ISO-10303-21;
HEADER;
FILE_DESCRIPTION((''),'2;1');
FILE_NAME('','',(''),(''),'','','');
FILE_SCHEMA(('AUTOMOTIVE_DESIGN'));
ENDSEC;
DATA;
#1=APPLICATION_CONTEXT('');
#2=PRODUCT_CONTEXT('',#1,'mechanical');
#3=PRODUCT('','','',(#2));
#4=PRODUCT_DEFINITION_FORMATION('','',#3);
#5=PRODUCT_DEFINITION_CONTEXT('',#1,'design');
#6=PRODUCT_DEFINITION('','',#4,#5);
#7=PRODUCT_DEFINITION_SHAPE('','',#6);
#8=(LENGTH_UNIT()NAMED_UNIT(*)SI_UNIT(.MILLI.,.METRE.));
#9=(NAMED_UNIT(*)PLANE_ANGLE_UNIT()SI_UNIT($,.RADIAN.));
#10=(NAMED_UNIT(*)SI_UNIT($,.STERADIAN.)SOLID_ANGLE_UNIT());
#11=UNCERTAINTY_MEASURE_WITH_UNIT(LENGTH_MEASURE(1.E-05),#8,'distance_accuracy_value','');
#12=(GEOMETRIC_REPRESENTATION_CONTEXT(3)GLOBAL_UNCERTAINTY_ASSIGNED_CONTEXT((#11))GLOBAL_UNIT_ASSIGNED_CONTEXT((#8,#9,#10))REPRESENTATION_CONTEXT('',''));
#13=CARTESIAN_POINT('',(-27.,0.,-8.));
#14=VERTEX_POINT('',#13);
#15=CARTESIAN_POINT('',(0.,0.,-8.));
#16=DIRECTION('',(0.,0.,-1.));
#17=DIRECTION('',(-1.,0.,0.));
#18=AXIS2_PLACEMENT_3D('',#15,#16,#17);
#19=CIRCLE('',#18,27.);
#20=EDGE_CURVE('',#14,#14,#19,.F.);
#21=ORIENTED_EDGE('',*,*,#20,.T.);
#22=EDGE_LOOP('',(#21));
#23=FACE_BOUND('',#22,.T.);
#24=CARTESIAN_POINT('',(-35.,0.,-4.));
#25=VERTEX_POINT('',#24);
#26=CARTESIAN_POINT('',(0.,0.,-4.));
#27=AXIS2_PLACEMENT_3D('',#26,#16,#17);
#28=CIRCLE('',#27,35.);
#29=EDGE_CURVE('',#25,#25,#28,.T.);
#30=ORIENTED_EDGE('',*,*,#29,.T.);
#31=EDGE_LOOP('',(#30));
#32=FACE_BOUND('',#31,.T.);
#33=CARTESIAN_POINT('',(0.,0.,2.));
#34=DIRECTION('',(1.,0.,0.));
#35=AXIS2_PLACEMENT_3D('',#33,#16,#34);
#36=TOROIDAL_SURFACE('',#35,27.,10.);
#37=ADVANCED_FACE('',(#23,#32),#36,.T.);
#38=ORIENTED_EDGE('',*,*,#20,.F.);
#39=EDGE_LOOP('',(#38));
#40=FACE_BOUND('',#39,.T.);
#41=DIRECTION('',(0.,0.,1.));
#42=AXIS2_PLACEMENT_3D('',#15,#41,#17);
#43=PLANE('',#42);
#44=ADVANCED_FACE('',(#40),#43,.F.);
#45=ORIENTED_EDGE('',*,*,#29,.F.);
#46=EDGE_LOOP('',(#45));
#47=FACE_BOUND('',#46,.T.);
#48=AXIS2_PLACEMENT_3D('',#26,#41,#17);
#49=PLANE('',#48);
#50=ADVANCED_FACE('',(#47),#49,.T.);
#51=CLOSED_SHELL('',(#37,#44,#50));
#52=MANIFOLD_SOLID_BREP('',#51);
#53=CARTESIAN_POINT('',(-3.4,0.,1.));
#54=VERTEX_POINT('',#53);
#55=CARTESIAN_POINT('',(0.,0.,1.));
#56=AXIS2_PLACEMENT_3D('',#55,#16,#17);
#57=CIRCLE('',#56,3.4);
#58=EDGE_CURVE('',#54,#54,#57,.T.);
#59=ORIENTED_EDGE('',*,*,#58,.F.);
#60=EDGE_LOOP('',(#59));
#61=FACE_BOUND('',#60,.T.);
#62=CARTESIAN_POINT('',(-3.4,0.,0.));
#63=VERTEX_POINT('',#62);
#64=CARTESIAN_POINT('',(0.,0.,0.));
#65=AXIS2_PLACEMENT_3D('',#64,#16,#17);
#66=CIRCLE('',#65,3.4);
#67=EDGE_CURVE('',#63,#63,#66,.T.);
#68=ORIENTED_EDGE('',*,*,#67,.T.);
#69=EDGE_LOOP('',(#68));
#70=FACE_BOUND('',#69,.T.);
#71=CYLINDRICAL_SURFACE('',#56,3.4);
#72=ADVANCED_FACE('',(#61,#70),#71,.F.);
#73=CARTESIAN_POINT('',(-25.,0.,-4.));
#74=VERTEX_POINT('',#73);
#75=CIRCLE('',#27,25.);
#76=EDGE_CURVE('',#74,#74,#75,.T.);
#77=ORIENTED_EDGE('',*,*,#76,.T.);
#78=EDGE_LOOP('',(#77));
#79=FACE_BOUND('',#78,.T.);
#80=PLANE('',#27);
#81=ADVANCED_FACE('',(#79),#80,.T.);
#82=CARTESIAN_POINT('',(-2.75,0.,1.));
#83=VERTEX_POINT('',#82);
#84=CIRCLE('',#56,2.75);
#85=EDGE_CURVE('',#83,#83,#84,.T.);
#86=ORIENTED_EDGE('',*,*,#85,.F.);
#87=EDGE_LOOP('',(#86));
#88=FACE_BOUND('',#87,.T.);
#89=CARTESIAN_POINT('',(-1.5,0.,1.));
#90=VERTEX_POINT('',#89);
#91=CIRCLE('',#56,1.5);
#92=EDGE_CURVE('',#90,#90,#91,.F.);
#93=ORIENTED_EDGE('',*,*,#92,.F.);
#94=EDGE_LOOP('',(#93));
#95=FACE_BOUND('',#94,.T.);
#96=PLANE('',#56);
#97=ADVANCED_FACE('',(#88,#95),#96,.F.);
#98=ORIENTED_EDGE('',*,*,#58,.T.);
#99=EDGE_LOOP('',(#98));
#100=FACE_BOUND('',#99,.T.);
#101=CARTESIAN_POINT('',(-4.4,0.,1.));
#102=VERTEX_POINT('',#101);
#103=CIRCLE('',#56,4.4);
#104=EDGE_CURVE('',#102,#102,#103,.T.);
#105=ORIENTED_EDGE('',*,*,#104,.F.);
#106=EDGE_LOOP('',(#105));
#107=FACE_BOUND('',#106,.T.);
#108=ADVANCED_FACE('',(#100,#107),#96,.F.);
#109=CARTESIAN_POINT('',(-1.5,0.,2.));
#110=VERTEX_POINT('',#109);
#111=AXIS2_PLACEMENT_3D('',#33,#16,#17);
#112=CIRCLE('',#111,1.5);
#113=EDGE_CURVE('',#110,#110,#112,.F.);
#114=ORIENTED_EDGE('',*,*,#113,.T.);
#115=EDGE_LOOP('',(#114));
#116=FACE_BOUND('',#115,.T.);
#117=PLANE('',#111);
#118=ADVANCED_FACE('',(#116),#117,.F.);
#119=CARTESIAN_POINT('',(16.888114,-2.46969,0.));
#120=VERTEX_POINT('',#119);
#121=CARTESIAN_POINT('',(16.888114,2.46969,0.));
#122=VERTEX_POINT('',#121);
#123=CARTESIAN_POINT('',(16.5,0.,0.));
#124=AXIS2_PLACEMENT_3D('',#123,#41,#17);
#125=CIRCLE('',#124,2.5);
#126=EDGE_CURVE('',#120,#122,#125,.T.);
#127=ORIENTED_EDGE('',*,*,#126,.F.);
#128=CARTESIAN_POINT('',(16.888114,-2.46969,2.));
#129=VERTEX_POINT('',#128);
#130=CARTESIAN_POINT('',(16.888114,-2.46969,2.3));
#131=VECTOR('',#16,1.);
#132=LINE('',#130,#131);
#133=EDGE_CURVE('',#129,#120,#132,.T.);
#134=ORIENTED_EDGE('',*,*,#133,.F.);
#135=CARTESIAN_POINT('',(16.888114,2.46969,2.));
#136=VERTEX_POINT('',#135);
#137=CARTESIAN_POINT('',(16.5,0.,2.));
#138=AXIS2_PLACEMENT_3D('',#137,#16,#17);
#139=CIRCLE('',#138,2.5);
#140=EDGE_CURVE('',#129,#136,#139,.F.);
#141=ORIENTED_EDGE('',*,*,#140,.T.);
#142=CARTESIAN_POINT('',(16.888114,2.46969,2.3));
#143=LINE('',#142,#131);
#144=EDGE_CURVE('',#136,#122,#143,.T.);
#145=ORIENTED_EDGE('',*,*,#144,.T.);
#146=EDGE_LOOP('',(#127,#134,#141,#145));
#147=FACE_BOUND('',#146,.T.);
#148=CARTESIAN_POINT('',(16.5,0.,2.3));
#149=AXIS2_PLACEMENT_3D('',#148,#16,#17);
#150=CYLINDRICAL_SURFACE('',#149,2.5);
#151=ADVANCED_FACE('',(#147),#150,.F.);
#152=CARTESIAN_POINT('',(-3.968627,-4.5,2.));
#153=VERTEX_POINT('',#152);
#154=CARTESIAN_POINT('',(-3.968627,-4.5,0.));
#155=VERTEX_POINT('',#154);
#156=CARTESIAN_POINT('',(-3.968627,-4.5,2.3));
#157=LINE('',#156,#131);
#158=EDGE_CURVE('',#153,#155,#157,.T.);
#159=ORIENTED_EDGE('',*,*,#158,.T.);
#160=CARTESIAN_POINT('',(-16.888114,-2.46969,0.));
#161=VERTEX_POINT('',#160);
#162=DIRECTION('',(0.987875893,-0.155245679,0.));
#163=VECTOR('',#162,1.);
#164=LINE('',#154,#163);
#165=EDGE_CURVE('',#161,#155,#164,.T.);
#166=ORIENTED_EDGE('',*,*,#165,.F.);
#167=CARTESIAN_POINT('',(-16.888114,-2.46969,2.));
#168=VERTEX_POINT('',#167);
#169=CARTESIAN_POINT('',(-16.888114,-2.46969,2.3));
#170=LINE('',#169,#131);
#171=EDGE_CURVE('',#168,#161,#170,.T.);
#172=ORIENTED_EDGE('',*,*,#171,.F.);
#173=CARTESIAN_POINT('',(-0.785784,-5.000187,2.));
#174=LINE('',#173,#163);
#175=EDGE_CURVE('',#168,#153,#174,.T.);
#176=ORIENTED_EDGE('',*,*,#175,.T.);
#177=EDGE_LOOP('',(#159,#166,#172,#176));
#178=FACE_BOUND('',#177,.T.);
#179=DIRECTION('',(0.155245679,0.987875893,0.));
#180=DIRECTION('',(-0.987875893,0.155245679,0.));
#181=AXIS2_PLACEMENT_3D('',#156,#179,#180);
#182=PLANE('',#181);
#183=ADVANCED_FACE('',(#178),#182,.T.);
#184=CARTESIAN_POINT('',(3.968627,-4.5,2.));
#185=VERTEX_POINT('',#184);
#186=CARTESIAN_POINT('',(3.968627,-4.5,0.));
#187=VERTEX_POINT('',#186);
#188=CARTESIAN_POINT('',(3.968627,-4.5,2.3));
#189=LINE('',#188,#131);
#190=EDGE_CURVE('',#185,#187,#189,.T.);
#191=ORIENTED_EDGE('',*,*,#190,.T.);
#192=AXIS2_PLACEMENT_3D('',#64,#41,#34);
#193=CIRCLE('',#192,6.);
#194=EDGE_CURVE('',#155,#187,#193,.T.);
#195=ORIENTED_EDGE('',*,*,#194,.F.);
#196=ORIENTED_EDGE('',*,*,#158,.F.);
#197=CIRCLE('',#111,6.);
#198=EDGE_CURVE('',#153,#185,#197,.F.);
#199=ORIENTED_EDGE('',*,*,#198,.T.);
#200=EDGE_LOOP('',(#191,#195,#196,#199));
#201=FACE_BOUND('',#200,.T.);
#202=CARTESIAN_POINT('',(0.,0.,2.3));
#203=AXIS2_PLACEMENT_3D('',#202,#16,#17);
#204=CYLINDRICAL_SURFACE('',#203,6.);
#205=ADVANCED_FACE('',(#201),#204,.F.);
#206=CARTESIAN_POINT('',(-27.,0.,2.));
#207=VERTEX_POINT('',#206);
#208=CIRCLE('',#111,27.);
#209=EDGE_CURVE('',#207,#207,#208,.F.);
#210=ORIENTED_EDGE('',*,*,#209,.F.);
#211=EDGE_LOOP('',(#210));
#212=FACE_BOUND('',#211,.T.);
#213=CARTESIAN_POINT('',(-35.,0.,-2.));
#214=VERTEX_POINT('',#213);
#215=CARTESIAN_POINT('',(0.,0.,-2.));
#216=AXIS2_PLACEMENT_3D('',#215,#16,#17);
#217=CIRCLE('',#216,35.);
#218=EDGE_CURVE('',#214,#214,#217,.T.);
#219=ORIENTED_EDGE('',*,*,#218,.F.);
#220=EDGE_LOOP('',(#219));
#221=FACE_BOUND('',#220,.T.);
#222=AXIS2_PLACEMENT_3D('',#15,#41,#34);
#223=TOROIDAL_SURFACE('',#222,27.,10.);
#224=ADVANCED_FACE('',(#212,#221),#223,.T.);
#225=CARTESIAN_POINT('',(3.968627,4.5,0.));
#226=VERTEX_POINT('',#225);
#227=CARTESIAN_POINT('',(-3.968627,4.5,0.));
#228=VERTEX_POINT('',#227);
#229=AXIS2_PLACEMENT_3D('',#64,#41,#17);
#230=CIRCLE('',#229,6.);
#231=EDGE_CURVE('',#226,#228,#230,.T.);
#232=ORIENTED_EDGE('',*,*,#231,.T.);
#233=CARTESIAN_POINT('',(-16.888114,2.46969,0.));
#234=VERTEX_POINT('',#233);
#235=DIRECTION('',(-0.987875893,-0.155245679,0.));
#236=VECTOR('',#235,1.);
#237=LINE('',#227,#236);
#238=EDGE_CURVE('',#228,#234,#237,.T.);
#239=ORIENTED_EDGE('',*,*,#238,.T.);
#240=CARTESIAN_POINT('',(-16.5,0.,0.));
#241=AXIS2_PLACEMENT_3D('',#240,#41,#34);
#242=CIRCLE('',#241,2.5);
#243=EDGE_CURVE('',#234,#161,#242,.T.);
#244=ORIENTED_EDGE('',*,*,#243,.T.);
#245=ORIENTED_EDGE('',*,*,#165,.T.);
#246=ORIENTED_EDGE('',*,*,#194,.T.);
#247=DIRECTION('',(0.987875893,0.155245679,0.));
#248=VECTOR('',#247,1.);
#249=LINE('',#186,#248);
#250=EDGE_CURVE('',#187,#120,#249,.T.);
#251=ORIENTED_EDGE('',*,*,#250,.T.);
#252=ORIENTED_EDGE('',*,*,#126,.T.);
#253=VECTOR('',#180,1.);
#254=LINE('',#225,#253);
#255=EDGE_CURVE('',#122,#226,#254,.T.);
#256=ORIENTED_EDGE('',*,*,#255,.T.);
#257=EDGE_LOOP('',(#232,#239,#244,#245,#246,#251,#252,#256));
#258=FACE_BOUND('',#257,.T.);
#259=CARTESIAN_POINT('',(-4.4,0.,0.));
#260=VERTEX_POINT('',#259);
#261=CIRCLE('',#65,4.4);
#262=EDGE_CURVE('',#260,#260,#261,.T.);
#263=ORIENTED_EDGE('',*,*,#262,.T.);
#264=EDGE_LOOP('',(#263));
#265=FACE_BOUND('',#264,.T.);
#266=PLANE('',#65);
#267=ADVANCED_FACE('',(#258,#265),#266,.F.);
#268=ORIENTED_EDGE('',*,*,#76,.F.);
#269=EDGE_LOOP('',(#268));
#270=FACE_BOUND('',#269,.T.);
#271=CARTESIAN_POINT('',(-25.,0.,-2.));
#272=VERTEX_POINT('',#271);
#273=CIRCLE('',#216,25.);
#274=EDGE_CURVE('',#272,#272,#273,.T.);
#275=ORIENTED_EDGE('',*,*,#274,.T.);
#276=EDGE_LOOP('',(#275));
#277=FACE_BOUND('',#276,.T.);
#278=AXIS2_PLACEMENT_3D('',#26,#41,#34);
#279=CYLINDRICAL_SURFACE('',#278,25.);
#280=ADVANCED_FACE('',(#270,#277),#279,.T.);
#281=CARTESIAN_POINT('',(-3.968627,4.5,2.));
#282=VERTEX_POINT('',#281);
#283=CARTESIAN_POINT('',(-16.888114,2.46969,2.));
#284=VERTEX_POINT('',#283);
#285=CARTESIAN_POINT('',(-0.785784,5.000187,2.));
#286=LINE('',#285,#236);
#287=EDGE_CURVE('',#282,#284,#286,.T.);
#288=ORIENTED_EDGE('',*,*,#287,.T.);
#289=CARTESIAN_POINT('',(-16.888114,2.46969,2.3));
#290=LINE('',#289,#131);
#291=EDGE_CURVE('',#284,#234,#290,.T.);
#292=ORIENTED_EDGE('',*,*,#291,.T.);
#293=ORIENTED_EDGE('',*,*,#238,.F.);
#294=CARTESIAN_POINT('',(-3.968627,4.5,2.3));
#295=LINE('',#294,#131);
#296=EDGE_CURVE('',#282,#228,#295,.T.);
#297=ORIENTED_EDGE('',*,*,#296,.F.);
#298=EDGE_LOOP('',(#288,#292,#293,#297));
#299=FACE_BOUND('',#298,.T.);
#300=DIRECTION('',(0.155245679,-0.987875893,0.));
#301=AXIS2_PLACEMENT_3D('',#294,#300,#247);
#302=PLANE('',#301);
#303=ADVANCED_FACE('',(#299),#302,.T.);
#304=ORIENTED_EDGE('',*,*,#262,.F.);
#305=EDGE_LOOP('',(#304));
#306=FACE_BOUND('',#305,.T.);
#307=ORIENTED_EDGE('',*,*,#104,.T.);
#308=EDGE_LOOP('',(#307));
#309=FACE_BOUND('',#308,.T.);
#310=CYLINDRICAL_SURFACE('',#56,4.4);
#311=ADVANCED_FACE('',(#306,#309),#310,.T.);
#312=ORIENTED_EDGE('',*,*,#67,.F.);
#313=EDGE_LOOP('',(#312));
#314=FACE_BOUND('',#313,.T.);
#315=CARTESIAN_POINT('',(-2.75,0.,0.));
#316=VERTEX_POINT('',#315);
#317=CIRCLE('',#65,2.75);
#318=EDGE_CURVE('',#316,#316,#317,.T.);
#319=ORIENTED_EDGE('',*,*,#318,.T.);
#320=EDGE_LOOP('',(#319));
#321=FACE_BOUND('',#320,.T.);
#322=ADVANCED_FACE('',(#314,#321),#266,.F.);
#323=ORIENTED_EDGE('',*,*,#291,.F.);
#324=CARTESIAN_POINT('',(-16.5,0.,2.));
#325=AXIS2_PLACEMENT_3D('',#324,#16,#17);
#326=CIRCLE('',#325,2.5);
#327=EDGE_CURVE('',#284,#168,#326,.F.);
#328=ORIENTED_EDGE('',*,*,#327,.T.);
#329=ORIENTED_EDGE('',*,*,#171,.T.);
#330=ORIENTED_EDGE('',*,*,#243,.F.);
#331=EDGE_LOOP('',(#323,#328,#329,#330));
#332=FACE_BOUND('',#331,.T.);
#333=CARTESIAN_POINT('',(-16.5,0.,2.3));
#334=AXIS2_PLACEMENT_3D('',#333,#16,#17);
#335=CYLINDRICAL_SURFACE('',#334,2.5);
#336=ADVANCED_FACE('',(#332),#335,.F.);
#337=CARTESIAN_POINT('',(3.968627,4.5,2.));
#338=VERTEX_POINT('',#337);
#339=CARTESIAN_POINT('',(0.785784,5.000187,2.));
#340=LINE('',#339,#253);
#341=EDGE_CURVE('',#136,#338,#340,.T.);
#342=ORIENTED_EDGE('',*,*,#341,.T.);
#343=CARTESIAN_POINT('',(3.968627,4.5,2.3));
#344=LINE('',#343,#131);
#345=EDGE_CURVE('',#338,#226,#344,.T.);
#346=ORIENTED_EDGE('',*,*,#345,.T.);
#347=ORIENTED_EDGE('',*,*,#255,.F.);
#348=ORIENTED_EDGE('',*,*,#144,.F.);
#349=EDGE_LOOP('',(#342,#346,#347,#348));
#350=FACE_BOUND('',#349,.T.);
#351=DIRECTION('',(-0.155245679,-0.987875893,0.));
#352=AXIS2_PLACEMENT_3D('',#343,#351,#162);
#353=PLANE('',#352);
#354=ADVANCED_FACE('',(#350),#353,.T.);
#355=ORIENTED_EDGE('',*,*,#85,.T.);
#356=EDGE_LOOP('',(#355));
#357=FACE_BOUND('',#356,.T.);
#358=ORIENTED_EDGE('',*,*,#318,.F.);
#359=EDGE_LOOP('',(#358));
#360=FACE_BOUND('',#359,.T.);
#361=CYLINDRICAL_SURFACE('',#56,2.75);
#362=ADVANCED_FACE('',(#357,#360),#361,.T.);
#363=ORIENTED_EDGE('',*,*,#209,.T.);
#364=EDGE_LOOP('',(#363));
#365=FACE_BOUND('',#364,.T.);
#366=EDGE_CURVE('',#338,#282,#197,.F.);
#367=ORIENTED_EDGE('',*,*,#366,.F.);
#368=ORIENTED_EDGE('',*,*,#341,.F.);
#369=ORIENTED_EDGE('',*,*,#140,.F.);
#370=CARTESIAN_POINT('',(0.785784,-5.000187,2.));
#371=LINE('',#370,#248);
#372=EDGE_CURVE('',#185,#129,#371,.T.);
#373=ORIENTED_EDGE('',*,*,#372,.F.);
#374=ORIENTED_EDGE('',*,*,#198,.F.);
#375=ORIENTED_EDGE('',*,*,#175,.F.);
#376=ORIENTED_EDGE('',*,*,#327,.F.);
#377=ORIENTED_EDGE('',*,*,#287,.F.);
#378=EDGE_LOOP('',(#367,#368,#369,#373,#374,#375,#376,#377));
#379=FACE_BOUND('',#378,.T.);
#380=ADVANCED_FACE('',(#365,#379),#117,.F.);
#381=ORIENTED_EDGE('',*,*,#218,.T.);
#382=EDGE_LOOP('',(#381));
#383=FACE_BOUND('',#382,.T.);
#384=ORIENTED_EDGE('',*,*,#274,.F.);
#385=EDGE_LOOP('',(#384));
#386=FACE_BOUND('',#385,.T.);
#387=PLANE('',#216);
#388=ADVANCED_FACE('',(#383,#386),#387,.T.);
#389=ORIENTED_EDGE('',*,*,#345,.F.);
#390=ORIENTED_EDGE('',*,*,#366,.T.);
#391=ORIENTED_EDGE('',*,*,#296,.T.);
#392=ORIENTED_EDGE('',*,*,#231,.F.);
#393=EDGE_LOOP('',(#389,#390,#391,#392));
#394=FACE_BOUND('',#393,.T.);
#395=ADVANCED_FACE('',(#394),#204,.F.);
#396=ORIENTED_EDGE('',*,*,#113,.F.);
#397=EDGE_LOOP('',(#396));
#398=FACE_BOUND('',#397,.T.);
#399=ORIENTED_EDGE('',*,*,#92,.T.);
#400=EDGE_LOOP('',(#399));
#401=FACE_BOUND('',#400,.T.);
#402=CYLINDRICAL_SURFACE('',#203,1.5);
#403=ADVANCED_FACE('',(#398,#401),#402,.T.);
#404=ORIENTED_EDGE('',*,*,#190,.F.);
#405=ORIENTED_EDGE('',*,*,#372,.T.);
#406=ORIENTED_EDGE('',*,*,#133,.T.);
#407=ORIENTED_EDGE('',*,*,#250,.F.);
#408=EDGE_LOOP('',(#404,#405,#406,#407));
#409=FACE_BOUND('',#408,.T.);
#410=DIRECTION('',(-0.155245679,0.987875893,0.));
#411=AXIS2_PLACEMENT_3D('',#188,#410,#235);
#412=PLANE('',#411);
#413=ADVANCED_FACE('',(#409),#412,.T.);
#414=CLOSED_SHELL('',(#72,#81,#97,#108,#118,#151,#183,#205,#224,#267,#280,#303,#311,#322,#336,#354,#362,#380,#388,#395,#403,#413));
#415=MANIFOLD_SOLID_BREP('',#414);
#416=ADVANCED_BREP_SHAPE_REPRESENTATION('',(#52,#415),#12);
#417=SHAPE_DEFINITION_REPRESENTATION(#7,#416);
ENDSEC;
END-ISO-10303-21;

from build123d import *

# Parameters (mm, degrees)
SKETCH_1_R               = 1.5
EXTRUDE_1_DEPTH          = 2.3
SKETCH_2_R               = 4.4
EXTRUDE_2_DEPTH          = 3.2
SKETCH_3_R               = 4.4
SKETCH_3_R_2             = 3.4
SKETCH_3_R_3             = 2.75
SKETCH_3_R_4             = 1.5
CUT_EXTRUDE_1_DEPTH      = 1
BOSS_EXTRUDE1_DEPTH      = 2
BOSS_EXTRUDE1_DEPTH_BACK = 2
SKETCH1_R                = 35
INTERSECT2_OUTLINE_R     = 4.4
INTERSECT2_OUTLINE_R_2   = 3.4
INTERSECT2_OUTLINE_R_3   = 2.75
INTERSECT2_DEPTH         = 5.5
INTERSECT2_START         = 1
INTERSECT2_2_OUTLINE_R   = 4.4
INTERSECT2_2_OUTLINE_R_2 = 3.4
INTERSECT2_2_OUTLINE_R_3 = 2.75
INTERSECT2_2_OUTLINE_R_4 = 1.5
INTERSECT2_2_DEPTH       = 4.5
FILLET1_R                = 10
SKETCH2_R                = 25
BOSS_EXTRUDE2_DEPTH      = 2
SKETCH3_R                = 27
BOSS_EXTRUDE3_DEPTH      = 2


# Read off the part's stored shape, not the designer's step: Intersect2
with BuildPart() as part:
    # Эскиз1 → Бобышка-Вытянуть1 (new body)
    with BuildSketch(Plane.XY):
        with BuildLine():
            Line((-3.968626967, 4.5), (-16.888114198, 2.469689731))
            ThreePointArc((-16.888114198, 2.469689731), (-19, 0), (-16.888114198, -2.469689731))
            Line((-16.888114198, -2.469689731), (-3.968626967, -4.5))
            ThreePointArc((-3.968626967, -4.5), (0, -6), (3.968626967, -4.5))
            Line((3.968626967, -4.5), (16.888114198, -2.469689731))
            ThreePointArc((16.888114198, -2.469689731), (19, 0), (16.888114198, 2.469689731))
            Line((16.888114198, 2.469689731), (3.968626967, 4.5))
            ThreePointArc((3.968626967, 4.5), (0, 6), (-3.968626967, 4.5))
        make_face()
        Circle(SKETCH_1_R, mode=Mode.SUBTRACT)
    extrude(amount=EXTRUDE_1_DEPTH)

    # Эскиз2 → Бобышка-Вытянуть2 (add)
    with BuildSketch(Plane.XY.offset(2.3)):
        with Locations(Location((0, 0, 0), (0, 0, 180))):
            Circle(SKETCH_2_R)
        Polygon((0.333439775, 2.639447604), (0, 3.05), (-0.333439775, 2.639447604), (-0.758504156, 2.954178641), (-0.979368078, 2.473601404), (-1.469348706, 2.672735374), (-1.563759083, 2.15232973), (-2.087868673, 2.223354314), (-2.049893354, 1.695819264), (-2.575200173, 1.634271725), (-2.407225286, 1.132754236), (-2.900722375, 0.942501833), (-2.6133024, 0.498514094), (-3.043981522, 0.191511085), (-2.655176114, -0.167049522), (-2.995976115, -0.571513009), (-2.530215347, -0.822116802), (-2.75972251, -1.298626839), (-2.246271844, -1.42552746), (-2.35006539, -1.944143169), (-1.821186821, -1.939366985), (-1.792745019, -2.467501833), (-1.281669931, -2.33134895), (-1.122779886, -2.835818282), (-0.661621006, -2.576843686), (-0.382266362, -3.025949839), (0, -2.660425857), (0.382266362, -3.025949839), (0.661621006, -2.576843686), (1.122779886, -2.835818282), (1.281669931, -2.33134895), (1.792745019, -2.467501833), (1.821186821, -1.939366985), (2.35006539, -1.944143169), (2.246271844, -1.42552746), (2.75972251, -1.298626839), (2.530215347, -0.822116802), (2.995976115, -0.571513009), (2.655176114, -0.167049522), (3.043981522, 0.191511085), (2.6133024, 0.498514094), (2.900722375, 0.942501833), (2.407225286, 1.132754236), (2.575200173, 1.634271725), (2.049893354, 1.695819264), (2.087868673, 2.223354314), (1.563759083, 2.15232973), (1.469348706, 2.672735374), (0.979368078, 2.473601404), (0.758504156, 2.954178641), align=None, mode=Mode.SUBTRACT)
    extrude(amount=EXTRUDE_2_DEPTH)

    # Эскиз3 → Вырез-Вытянуть1 (cut)
    # profile 1 of 2: a face of its own
    with BuildSketch(Plane(origin=(0, 0, 0), x_dir=(-1, 0, 0), z_dir=(0, 0, -1))):
        Circle(SKETCH_3_R)
        Circle(SKETCH_3_R_2, mode=Mode.SUBTRACT)
    # profile 2 of 2: a face of its own
    with BuildSketch(Plane(origin=(0, 0, 0), x_dir=(-1, 0, 0), z_dir=(0, 0, -1))):
        Circle(SKETCH_3_R_3)
        Circle(SKETCH_3_R_4, mode=Mode.SUBTRACT)
    extrude(amount=-CUT_EXTRUDE_1_DEPTH, mode=Mode.SUBTRACT)


with BuildPart() as body_2:
    # Sketch1 → Boss-Extrude1 (new, two sides: drawn at the far end of the back side and taken through both)
    with BuildSketch(Plane(origin=(0, 0, 0), x_dir=(-1, 0, 0), z_dir=(0, 0, -1)).offset(-BOSS_EXTRUDE1_DEPTH_BACK)):
        Circle(SKETCH1_R)
    extrude(amount=BOSS_EXTRUDE1_DEPTH + BOSS_EXTRUDE1_DEPTH_BACK)


with BuildPart() as intersect2_tool:
    # Intersect2 outline → Intersect2 (new body)
    # profile 1 of 2: a face of its own
    with BuildSketch(Plane.XY):
        with BuildLine():
            ThreePointArc((3.968626967, 4.5), (0, 6), (-3.968626967, 4.5))
            Line((-3.968626967, 4.5), (-16.888114198, 2.469689731))
            ThreePointArc((-16.888114198, 2.469689731), (-19, 0), (-16.888114198, -2.469689731))
            Line((-16.888114198, -2.469689731), (-3.968626967, -4.5))
            ThreePointArc((-3.968626967, -4.5), (0, -6), (3.968626967, -4.5))
            Line((3.968626967, -4.5), (16.888114198, -2.469689731))
            ThreePointArc((16.888114198, -2.469689731), (19, 0), (16.888114198, 2.469689731))
            Line((16.888114198, 2.469689731), (3.968626967, 4.5))
        make_face()
        Circle(INTERSECT2_OUTLINE_R, mode=Mode.SUBTRACT)
    # profile 2 of 2: a face of its own
    with BuildSketch(Plane.XY):
        Circle(INTERSECT2_OUTLINE_R_2)
        Circle(INTERSECT2_OUTLINE_R_3, mode=Mode.SUBTRACT)
    extrude(amount=INTERSECT2_DEPTH)


with BuildPart() as part_1:
    add(part.part)

    # Intersect2: cut by intersect2_tool
    add(intersect2_tool.part, mode=Mode.SUBTRACT)


with BuildPart() as body_2_1:
    add(body_2.part)

    # Intersect2: cut by intersect2_tool
    add(intersect2_tool.part, mode=Mode.SUBTRACT)


with BuildPart() as intersect2_2_tool:
    # Intersect2 2 outline → Intersect2 2 (new body)
    # profile 1 of 2: a face of its own
    with BuildSketch(Plane.XY.offset(INTERSECT2_START)):
        Circle(INTERSECT2_2_OUTLINE_R)
        Circle(INTERSECT2_2_OUTLINE_R_2, mode=Mode.SUBTRACT)
    # profile 2 of 2: a face of its own
    with BuildSketch(Plane.XY.offset(INTERSECT2_START)):
        Circle(INTERSECT2_2_OUTLINE_R_3)
        Circle(INTERSECT2_2_OUTLINE_R_4, mode=Mode.SUBTRACT)
    extrude(amount=INTERSECT2_2_DEPTH)


with BuildPart() as part_2:
    add(part_1.part)

    # Intersect2 2: cut by intersect2_2_tool
    add(intersect2_2_tool.part, mode=Mode.SUBTRACT)


with BuildPart() as body_2_2:
    add(body_2_1.part)

    # Intersect2 2: cut by intersect2_2_tool
    add(intersect2_2_tool.part, mode=Mode.SUBTRACT)

    # Fillet1
    # the kernel refuses this fillet: 10 mm, written as the material it takes off along each edge
    with BuildSketch(Plane(origin=(0, 0, 2), x_dir=(-1, 0, 0), z_dir=(0, -1, 0))) as fillet1_piece_1:
        with BuildLine():
            CenterArc((27, 10), FILLET1_R, 270, 53.130102354)
            Line((27, 0), (27, -0.2))
            Line((27, -0.2), (35, -0.2))
            Line((35, -0.2), (35.2, 0))
            ThreePointArc((35.2, 0), (35.2, 2), (35.16, 3.88))
            Line((35.16, 3.88), (35, 4))
        make_face()
    revolve(axis=Axis((0, 0, 2), (0, 0, -1)), mode=Mode.SUBTRACT)


with BuildPart() as body_2_2_1:
    # Mirror9: mirrored copy
    add(body_2_2.part.mirror(Plane.XY.offset(-3)))

    # Sketch3 → Boss-Extrude3 (add)
    with BuildSketch(Plane(origin=(0, 0, -8), x_dir=(-1, 0, 0), z_dir=(0, 0, -1))):
        Circle(SKETCH3_R)
    extrude(amount=-BOSS_EXTRUDE3_DEPTH)


with BuildPart() as body_2_3:
    add(body_2_2.part)

    # Sketch2 → Boss-Extrude2 (add)
    with BuildSketch(Plane(origin=(0, 0, -2), x_dir=(-1, 0, 0), z_dir=(0, 0, -1))):
        Circle(SKETCH2_R)
    extrude(amount=BOSS_EXTRUDE2_DEPTH)


solid = Compound([body_2_2_1.part, body_2_3.part])
